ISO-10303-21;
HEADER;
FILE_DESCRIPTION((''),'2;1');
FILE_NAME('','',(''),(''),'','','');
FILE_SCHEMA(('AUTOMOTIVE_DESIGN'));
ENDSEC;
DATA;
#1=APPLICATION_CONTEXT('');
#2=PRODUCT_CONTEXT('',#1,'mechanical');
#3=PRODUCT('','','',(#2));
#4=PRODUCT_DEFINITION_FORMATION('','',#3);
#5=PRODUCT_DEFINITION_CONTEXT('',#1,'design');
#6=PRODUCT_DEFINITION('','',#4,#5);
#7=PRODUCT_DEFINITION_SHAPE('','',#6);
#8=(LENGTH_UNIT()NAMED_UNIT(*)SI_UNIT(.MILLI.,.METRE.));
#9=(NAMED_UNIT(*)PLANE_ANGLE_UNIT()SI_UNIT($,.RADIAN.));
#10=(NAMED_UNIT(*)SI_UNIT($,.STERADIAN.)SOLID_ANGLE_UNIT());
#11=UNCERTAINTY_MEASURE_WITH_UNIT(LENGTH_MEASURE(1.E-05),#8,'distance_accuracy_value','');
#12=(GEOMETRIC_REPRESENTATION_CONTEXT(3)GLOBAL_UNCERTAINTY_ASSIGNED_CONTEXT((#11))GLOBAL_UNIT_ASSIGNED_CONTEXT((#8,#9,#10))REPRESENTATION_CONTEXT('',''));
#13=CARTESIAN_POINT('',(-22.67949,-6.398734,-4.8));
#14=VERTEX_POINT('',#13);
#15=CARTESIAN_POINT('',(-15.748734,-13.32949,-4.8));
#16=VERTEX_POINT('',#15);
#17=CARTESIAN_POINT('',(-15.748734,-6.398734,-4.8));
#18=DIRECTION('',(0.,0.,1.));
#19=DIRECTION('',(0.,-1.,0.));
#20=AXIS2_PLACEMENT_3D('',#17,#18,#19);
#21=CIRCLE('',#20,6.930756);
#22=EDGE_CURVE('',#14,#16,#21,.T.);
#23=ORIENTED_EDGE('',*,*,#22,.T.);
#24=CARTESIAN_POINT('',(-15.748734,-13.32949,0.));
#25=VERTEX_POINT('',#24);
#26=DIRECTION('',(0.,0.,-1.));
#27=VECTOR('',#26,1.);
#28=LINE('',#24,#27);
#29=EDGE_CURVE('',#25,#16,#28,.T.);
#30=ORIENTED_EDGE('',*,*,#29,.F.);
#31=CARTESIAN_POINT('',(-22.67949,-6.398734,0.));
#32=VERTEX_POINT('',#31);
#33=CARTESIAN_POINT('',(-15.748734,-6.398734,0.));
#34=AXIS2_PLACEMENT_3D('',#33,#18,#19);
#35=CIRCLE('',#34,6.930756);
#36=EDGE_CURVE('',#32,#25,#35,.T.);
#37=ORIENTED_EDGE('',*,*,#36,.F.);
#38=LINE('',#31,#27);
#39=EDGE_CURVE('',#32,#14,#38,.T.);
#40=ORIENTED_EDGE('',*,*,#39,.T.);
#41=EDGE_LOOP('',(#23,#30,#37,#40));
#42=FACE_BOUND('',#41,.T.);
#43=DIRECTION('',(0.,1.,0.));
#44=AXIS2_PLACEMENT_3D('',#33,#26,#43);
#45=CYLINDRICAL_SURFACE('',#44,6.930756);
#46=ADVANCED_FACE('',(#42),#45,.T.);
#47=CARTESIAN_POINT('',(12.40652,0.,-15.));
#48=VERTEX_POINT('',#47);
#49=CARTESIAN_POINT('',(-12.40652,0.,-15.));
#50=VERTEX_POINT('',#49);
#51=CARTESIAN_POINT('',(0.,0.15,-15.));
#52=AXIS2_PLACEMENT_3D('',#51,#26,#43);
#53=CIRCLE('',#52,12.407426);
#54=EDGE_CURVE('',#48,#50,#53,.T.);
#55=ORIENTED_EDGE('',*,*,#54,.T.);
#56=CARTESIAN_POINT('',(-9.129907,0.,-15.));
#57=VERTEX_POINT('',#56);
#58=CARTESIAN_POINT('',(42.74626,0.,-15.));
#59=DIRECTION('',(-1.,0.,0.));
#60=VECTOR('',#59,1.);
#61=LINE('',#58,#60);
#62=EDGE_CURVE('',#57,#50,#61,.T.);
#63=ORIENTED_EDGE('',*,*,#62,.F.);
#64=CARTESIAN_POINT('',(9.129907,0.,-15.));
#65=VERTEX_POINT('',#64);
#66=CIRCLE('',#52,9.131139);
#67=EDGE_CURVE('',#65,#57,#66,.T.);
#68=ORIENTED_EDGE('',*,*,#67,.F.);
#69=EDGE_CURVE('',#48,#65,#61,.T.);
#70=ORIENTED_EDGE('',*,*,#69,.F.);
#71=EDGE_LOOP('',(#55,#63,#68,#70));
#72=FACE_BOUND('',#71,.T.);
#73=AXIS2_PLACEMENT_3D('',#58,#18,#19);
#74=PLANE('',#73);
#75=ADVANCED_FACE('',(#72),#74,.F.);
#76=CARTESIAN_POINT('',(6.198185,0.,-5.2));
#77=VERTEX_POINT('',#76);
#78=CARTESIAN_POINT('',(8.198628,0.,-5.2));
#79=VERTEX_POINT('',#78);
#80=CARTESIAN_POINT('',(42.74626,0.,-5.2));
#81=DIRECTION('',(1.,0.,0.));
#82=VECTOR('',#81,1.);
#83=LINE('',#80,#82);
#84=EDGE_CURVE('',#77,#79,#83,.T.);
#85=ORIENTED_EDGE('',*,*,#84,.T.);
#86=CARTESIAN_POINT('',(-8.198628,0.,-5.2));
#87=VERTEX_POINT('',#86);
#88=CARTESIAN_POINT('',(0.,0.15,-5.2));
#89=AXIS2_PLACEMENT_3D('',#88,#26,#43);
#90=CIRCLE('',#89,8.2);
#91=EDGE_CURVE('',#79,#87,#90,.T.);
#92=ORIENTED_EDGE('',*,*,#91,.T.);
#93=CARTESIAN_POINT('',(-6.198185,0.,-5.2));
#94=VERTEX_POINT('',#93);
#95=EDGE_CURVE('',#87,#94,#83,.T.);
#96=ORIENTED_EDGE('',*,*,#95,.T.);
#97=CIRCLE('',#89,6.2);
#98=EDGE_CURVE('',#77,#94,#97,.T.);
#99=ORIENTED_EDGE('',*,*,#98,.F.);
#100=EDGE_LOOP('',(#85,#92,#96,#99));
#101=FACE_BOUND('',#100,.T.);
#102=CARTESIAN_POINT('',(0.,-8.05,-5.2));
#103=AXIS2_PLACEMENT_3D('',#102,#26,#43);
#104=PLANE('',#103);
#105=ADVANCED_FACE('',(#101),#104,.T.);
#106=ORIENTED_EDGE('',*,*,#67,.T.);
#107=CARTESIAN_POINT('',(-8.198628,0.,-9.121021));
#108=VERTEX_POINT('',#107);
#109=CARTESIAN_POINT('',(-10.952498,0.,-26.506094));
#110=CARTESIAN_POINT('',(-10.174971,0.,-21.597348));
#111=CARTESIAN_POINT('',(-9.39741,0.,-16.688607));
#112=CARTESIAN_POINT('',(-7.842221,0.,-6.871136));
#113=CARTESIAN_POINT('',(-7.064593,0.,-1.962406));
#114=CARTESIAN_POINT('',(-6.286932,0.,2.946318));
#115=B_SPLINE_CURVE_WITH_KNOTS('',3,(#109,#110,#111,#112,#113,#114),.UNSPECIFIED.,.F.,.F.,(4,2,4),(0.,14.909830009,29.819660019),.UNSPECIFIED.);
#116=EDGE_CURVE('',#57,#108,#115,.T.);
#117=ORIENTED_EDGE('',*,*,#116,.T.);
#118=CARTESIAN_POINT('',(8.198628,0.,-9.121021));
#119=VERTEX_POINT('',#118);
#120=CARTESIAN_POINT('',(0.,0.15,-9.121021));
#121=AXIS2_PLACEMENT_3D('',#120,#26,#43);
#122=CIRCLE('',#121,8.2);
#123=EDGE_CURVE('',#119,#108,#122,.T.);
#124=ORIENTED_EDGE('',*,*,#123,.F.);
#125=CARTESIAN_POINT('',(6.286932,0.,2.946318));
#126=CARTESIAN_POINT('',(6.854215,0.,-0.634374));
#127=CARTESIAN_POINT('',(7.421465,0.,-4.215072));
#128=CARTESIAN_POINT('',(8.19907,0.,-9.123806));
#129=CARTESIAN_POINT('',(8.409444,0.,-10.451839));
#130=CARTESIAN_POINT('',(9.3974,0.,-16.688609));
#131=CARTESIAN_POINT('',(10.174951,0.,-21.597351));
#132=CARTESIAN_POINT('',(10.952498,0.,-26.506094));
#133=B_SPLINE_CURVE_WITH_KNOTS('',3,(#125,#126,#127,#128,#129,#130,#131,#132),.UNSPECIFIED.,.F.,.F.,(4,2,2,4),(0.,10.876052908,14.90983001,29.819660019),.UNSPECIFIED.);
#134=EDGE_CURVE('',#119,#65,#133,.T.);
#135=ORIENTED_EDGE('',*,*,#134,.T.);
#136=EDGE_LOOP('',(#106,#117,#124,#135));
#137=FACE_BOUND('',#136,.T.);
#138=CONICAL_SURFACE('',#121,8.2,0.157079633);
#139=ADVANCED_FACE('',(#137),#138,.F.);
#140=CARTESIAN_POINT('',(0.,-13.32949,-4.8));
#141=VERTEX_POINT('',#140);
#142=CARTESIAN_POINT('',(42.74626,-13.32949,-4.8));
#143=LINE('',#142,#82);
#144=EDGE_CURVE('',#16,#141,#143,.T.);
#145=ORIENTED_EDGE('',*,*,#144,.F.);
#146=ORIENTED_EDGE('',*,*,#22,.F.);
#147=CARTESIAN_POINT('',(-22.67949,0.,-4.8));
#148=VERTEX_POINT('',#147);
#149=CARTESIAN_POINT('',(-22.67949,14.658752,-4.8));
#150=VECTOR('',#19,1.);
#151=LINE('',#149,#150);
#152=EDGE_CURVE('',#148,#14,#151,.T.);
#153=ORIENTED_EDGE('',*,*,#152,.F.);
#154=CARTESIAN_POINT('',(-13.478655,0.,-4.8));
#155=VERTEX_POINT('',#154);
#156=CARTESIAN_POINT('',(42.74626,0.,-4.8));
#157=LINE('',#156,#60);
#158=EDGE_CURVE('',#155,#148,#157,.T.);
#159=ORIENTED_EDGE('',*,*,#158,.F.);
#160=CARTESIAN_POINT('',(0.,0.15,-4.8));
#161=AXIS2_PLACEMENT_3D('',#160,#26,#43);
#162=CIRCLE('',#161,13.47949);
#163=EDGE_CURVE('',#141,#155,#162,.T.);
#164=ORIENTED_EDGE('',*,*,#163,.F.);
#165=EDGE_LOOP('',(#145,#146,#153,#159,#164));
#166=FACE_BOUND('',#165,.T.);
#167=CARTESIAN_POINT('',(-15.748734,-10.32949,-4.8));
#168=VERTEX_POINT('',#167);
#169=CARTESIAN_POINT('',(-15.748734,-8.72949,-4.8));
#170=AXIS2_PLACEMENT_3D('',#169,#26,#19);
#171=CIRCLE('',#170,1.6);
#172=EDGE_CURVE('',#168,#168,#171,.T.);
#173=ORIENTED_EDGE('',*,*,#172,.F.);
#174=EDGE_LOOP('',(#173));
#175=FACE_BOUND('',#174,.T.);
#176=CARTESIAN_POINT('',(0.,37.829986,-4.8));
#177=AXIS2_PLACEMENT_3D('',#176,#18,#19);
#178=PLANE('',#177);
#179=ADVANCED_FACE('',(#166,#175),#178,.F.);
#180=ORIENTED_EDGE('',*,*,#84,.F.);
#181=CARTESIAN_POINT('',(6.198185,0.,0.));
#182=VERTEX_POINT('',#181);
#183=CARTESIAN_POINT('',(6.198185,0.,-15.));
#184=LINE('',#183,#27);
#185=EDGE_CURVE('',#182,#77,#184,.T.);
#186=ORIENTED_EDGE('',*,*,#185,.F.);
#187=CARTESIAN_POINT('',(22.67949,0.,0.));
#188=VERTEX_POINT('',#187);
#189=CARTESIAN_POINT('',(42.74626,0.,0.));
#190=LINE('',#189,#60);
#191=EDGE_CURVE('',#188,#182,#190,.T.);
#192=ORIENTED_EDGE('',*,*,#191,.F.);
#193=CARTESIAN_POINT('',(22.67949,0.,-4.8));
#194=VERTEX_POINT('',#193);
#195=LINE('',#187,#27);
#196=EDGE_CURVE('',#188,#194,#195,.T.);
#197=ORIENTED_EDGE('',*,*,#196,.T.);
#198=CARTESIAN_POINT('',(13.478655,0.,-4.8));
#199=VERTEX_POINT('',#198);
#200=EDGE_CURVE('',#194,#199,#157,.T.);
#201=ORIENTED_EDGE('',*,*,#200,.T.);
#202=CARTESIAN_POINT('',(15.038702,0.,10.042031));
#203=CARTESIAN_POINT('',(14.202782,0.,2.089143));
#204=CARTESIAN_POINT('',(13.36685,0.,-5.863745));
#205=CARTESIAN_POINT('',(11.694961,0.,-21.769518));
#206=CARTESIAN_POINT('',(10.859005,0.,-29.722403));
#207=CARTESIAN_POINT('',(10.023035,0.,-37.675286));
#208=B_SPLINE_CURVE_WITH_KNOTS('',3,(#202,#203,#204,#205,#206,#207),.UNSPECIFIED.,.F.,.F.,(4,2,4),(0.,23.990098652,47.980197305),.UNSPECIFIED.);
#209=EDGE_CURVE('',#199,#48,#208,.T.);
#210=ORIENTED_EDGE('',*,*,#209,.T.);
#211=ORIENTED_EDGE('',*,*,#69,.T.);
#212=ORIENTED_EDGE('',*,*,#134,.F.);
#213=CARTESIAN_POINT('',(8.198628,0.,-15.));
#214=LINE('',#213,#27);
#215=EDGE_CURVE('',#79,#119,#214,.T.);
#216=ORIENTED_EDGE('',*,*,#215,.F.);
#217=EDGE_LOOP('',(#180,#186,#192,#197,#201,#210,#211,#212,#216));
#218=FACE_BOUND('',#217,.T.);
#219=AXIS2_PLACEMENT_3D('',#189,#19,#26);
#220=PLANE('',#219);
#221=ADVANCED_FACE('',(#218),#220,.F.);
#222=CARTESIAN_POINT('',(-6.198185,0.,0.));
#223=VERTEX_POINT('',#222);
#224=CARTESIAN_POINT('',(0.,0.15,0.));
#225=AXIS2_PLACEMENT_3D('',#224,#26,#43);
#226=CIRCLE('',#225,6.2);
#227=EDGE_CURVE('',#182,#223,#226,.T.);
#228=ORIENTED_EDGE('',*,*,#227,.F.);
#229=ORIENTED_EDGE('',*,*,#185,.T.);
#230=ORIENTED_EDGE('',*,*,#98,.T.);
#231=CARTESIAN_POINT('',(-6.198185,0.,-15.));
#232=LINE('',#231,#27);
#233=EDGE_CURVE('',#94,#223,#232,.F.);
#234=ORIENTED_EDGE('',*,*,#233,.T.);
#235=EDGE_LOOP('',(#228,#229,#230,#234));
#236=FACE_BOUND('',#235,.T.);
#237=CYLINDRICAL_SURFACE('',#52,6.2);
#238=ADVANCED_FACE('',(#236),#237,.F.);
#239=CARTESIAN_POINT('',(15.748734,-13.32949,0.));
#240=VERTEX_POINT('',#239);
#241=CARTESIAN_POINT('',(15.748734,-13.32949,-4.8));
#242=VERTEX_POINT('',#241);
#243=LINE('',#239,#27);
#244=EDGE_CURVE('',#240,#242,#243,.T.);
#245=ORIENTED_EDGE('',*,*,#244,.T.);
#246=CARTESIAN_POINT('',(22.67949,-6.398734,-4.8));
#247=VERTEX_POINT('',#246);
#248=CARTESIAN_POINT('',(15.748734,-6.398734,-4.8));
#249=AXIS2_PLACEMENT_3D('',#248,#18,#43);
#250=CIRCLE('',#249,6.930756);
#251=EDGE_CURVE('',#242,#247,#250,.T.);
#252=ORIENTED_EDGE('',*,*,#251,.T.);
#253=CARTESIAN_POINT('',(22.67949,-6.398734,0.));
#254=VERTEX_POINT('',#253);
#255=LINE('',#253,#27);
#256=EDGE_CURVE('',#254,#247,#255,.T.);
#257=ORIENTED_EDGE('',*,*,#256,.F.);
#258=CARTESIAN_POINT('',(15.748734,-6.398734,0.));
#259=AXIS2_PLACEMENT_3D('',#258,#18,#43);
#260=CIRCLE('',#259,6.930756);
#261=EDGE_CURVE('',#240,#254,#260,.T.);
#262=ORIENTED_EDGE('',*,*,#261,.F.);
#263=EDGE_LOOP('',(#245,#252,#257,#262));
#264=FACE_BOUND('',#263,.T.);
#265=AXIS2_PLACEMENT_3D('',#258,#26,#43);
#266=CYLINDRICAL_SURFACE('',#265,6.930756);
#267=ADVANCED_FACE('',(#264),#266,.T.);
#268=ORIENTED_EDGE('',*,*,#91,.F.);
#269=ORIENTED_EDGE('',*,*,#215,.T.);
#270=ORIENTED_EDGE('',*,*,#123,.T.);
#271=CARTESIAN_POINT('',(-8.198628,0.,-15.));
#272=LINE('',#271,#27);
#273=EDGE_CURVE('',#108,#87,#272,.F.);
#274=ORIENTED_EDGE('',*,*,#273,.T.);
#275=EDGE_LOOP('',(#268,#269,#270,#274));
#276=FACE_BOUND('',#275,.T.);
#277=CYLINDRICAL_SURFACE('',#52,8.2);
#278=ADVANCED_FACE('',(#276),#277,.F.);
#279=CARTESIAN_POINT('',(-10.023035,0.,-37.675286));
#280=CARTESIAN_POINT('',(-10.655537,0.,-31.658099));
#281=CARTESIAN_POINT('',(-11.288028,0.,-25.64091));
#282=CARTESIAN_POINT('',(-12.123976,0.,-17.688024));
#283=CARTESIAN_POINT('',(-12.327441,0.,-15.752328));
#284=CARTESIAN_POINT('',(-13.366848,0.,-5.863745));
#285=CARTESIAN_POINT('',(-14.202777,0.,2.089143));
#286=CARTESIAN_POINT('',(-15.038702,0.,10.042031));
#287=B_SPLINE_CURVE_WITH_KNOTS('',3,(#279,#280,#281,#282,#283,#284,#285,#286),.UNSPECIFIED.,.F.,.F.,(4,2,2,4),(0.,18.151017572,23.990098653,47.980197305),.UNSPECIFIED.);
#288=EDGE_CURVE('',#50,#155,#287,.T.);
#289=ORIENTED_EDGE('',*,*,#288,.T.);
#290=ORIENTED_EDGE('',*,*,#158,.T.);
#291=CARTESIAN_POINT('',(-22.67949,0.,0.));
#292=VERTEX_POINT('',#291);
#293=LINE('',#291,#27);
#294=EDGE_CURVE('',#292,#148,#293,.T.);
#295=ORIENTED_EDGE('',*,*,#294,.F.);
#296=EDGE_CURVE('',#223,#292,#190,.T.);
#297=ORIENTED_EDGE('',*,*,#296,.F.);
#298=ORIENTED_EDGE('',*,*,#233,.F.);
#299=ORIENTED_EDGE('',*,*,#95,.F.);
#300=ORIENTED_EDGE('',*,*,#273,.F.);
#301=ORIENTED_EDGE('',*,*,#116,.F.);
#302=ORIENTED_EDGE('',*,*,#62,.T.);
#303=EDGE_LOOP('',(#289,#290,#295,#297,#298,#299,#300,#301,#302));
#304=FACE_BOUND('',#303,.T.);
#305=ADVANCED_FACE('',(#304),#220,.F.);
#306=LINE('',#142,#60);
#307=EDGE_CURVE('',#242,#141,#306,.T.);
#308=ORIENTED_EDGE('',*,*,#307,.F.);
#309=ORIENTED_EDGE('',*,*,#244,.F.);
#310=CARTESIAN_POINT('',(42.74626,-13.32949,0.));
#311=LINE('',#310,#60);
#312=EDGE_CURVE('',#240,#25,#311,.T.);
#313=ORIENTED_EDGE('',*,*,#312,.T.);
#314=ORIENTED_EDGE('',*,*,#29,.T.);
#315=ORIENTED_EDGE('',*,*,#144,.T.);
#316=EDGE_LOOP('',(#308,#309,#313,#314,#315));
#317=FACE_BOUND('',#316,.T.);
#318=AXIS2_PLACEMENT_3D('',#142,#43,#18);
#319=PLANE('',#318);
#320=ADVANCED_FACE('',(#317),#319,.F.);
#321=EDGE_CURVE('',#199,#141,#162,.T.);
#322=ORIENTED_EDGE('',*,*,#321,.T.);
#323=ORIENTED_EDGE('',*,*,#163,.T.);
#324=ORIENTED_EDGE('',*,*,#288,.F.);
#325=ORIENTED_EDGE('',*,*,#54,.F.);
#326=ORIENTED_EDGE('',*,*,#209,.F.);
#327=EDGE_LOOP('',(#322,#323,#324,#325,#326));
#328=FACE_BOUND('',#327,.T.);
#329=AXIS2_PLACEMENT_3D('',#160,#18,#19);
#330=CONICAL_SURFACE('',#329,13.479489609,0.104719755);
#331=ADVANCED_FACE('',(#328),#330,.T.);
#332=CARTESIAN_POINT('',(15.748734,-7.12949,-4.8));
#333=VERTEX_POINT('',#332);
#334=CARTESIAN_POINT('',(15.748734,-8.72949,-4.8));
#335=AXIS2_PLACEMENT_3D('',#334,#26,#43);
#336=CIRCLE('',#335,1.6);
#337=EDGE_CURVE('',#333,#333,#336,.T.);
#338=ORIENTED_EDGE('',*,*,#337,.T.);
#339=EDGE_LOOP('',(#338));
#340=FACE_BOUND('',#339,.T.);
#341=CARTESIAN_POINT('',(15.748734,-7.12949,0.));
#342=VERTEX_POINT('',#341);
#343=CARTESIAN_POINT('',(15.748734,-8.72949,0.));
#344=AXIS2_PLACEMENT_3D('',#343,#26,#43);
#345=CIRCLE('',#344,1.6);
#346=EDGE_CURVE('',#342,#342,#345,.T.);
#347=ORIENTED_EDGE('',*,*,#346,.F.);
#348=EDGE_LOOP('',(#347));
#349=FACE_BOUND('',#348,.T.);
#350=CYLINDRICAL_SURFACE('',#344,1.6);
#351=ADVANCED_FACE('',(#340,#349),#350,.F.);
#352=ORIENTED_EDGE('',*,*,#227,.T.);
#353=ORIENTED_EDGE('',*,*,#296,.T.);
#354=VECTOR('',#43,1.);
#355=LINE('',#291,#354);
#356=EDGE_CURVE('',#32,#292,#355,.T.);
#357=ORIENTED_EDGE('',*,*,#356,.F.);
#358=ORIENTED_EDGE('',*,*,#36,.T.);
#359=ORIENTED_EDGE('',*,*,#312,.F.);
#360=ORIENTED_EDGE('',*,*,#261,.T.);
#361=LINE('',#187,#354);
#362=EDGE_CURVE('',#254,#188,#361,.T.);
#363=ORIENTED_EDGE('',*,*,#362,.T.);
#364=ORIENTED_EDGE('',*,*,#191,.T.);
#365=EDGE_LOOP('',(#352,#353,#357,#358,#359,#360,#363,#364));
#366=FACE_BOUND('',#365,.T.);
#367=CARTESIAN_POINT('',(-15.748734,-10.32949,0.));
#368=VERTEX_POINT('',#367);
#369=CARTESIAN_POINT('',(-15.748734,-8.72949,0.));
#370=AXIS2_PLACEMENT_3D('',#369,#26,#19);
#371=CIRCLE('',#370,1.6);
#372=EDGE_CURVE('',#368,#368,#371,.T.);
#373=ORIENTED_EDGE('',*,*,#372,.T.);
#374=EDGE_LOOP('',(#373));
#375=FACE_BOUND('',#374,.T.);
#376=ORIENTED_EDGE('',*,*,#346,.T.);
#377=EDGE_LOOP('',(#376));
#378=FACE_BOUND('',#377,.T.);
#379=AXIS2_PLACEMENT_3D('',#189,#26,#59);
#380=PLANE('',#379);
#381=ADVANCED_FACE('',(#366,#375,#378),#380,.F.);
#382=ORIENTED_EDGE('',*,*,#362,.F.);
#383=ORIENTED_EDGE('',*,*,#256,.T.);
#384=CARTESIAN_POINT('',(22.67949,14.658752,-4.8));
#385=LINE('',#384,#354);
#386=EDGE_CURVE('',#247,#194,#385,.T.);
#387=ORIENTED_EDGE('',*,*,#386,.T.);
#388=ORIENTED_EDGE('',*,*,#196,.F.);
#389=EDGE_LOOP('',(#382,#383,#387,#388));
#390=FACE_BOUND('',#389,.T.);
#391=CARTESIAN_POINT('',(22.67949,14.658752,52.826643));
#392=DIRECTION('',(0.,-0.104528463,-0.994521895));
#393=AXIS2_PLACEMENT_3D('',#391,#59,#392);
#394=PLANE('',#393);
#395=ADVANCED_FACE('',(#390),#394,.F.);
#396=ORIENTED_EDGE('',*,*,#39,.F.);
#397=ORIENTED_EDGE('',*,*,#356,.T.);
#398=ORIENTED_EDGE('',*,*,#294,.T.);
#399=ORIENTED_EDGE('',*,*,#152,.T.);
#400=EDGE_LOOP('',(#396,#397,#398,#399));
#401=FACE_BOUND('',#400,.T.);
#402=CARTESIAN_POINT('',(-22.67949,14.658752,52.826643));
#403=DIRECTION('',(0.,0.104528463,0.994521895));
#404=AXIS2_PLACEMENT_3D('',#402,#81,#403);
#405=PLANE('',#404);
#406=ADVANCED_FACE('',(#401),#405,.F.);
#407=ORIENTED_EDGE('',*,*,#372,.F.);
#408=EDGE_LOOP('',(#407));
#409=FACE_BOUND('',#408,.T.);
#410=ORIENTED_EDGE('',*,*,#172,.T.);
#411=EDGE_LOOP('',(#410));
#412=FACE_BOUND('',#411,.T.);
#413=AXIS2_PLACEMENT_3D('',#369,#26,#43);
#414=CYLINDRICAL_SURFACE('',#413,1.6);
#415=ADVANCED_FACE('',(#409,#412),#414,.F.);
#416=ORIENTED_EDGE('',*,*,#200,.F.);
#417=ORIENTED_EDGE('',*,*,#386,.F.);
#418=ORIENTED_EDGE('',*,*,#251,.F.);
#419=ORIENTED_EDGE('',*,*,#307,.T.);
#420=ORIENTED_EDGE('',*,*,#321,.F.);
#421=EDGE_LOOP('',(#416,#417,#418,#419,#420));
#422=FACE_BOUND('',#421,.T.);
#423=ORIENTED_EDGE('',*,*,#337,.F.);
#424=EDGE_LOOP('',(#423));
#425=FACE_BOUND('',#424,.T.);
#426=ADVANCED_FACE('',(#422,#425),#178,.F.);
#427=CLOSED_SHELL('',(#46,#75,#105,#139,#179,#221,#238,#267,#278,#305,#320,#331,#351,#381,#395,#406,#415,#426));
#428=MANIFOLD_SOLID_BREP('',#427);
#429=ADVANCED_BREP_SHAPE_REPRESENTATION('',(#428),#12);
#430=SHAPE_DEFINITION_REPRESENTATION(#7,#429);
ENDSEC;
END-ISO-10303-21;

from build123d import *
from OCP.BRepAlgoAPI import BRepAlgoAPI_Cut
from OCP.TopTools import TopTools_ListOfShape

# Parameters (mm, degrees)
BOSS_EXTRUDE2_DEPTH      = 22.67949
BOSS_EXTRUDE2_DEPTH_BACK = 22.67949
SKETCH5_R                = 1.6
CUT_EXTRUDE1_DEPTH       = 29.214793281


with BuildPart() as part:
    # Sketch3 → Boss-Extrude2 (new, two sides: drawn at the far end of the back side and taken through both)
    with BuildSketch(Plane(origin=(0, 0, 0), x_dir=(0, 0, -1), z_dir=(1, 0, 0)).offset(-BOSS_EXTRUDE2_DEPTH_BACK)):
        Polygon((4.8, -13.329489609), (0, -13.329489609), (0, 0), (15, 0), (15, -12.25742641), align=None)
    extrude(amount=BOSS_EXTRUDE2_DEPTH + BOSS_EXTRUDE2_DEPTH_BACK)

    # Sketch2 → Cut-Revolve1 (revolve, cut)
    with BuildSketch(Plane(origin=(0, 0, 0), x_dir=(0, 0, -1), z_dir=(1, 0, 0))):
        Polygon((15, 0.15), (0, 0.15), (0, -6.05), (5.2, -6.05), (5.2, -8.05), (9.121020847, -8.05), (15, -8.981138823), align=None)
    revolve(axis=Axis((0, 0.15, -15), (0, 0, 1)), mode=Mode.SUBTRACT)

    # Sketch4 → Cut-Revolve2 (revolve, cut)
    with BuildSketch(Plane(origin=(0, 0.15, -14), x_dir=(0, 0, -1), z_dir=(1, 0, 0))):
        Polygon((1, 12.40742641), (-9.2, 13.479489609), (-9.2, 37.679985647), (1, 37.679985647), align=None)
    revolve(axis=Axis((0, 0.15, -14), (0, 0, 1)), mode=Mode.SUBTRACT)


with BuildPart() as cut_extrude1_tool:
    # Sketch5 → Cut-Extrude1 (new, through all)
    with BuildSketch(Plane(origin=(0, 0, -4.8), x_dir=(-1, 0, 0), z_dir=(0, 0, -1))):
        with Locations(Location((-15.748733562, -8.729489609, 0), (0, 0, 90))):
            Circle(SKETCH5_R)
        with Locations(Location((15.748733562, -8.729489609, 0), (0, 0, 270))):
            Circle(SKETCH5_R)
        with BuildLine():
            Line((-22.679489609, -13.329489609), (-22.679489609, -6.398733562))
            ThreePointArc((-22.679489609, -6.398733562), (-20.649518162, -11.299518162), (-15.748733562, -13.329489609))
            Line((-15.748733562, -13.329489609), (-22.679489609, -13.329489609))
        make_face()
        with BuildLine():
            Line((22.679489609, -13.329489609), (22.679489609, -6.398733562))
            ThreePointArc((22.679489609, -6.398733562), (20.649518162, -11.299518162), (15.748733562, -13.329489609))
            Line((15.748733562, -13.329489609), (22.679489609, -13.329489609))
        make_face()
    extrude(amount=-CUT_EXTRUDE1_DEPTH)


with BuildPart() as part_1:
    add(part.part)

    # Cut-Extrude1: cut by cut_extrude1_tool, with a tolerance
    cut_extrude1_stock = TopTools_ListOfShape()
    cut_extrude1_stock.Append(part_1.part.wrapped)
    cut_extrude1_tools = TopTools_ListOfShape()
    cut_extrude1_tools.Append(cut_extrude1_tool.part.wrapped)
    cut_extrude1_cut = BRepAlgoAPI_Cut()
    cut_extrude1_cut.SetArguments(cut_extrude1_stock)
    cut_extrude1_cut.SetTools(cut_extrude1_tools)
    cut_extrude1_cut.SetFuzzyValue(0.00001)
    cut_extrude1_cut.Build()
    add(Compound.cast(cut_extrude1_cut.Shape()).solids(), mode=Mode.REPLACE)


solid = part_1.part
